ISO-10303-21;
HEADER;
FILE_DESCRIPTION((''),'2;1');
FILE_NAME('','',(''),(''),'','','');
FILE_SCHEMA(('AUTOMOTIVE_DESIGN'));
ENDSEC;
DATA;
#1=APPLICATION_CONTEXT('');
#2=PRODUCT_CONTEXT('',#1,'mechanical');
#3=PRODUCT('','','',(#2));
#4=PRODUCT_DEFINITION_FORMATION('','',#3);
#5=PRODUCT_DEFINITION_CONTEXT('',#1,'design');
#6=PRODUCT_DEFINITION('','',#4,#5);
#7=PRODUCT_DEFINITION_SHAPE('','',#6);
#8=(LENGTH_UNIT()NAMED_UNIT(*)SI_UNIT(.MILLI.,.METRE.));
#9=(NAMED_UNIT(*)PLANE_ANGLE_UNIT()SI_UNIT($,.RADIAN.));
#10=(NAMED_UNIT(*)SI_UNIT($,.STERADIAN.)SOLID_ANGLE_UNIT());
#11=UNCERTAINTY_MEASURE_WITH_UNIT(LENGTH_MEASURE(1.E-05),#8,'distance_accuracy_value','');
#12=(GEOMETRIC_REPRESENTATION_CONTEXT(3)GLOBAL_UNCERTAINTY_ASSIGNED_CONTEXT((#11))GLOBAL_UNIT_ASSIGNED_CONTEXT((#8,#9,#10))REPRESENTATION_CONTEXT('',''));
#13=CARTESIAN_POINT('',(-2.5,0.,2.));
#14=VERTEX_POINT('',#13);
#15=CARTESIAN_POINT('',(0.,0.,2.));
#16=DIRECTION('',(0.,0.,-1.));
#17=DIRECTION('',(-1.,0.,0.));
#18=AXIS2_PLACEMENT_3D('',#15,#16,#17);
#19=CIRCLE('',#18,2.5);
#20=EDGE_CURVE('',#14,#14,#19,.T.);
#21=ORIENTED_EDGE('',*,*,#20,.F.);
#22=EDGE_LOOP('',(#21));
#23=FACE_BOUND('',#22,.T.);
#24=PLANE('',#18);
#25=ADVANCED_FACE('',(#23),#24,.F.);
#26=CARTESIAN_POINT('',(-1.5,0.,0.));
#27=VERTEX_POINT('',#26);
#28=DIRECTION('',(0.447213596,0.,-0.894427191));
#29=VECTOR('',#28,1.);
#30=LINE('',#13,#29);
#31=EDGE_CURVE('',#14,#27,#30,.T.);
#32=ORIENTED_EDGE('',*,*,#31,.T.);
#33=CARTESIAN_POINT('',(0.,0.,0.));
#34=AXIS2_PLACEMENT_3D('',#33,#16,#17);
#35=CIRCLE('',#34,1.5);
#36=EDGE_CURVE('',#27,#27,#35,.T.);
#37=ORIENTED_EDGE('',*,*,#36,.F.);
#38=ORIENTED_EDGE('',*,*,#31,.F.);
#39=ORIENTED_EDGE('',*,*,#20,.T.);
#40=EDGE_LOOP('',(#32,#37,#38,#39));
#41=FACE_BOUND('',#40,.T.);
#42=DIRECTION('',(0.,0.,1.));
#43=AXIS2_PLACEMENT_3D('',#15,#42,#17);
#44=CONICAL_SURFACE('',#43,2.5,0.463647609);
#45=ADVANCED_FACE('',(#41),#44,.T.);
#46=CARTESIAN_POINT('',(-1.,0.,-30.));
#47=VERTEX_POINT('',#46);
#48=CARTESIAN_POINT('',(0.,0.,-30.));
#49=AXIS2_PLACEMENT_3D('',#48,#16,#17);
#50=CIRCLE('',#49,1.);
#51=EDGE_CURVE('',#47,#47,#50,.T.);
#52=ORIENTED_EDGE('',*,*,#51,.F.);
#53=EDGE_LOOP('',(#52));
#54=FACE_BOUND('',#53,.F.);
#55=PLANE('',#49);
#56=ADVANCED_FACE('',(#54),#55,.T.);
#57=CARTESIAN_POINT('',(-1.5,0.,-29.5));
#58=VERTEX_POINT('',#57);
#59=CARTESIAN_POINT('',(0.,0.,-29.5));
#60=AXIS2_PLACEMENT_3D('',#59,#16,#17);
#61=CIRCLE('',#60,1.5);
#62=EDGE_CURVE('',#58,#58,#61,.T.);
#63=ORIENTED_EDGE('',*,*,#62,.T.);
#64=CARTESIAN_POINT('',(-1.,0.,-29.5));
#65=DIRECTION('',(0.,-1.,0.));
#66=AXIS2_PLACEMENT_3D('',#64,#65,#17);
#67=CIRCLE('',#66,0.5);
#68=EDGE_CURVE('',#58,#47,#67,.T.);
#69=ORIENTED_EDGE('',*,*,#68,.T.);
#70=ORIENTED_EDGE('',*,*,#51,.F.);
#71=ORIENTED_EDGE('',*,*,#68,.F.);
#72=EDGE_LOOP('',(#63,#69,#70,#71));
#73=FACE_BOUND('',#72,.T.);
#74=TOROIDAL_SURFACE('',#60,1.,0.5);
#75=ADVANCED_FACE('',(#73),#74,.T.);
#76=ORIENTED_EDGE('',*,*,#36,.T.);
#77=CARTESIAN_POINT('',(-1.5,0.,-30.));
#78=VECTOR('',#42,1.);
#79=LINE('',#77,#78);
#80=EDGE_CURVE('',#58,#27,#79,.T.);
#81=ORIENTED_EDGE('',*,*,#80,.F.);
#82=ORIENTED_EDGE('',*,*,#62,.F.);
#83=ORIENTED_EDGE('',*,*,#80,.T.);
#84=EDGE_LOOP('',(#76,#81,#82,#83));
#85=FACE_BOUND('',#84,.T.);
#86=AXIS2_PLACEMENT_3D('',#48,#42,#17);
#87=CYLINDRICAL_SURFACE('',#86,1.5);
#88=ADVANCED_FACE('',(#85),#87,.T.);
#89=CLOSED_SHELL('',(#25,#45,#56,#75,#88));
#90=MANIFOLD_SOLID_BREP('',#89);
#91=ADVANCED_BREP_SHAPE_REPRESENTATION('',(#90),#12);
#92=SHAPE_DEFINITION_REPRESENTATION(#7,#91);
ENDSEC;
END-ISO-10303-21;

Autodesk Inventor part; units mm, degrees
ref_plane "YZ Plane" through (0, 0, 0) normal (1, 0, 0) x (0, 1, 0)
ref_plane "XZ Plane" through (0, 0, 0) normal (0, 1, 0) x (-1, 0, 0)
ref_plane "XY Plane" through (0, 0, 0) normal (0, 0, 1) x (1, 0, 0)
sketch "Schizzo1" plane through (0, 0, 0) normal (0, 1, 0) x (-1, 0, 0)
  line L0 (0, 0) -> (1.5, 0)
  line L1 (0, 0) -> (1.5, 0) construction
  line L2 (0, 2) -> (2.5, 2)
  line L3 (0, 2) -> (2.5, 2) construction
  line L4 (0, 0) -> (0, 2)
  line L5 (2.5, 2) -> (1.5, 0)
  line L6 (1.5, 0) -> (0, 0)
  line L7 (0, 0) -> (0, -30)
  line L8 (0, -30) -> (1.5, -30)
  line L9 (1.5, -30) -> (1.5, 0)
  dimension "d0" = 1.5
  dimension "d2" = 2.5
  dimension "d4" = 2
  dimension "d6" = 30
revolve "Rivoluzione1" add sketch "Schizzo1" angle 360 about axis through (0, 0, 0) along (0, 0, -1)
fillet "Raccordo1" radius 0.5 1 edges at (1.5, 0, -30)
thread "Filettatura1" size "M3x0.5" class "6g" standard "ANSI Metric M Profile" full length
properties part number "12_Vite_M3_L30"
